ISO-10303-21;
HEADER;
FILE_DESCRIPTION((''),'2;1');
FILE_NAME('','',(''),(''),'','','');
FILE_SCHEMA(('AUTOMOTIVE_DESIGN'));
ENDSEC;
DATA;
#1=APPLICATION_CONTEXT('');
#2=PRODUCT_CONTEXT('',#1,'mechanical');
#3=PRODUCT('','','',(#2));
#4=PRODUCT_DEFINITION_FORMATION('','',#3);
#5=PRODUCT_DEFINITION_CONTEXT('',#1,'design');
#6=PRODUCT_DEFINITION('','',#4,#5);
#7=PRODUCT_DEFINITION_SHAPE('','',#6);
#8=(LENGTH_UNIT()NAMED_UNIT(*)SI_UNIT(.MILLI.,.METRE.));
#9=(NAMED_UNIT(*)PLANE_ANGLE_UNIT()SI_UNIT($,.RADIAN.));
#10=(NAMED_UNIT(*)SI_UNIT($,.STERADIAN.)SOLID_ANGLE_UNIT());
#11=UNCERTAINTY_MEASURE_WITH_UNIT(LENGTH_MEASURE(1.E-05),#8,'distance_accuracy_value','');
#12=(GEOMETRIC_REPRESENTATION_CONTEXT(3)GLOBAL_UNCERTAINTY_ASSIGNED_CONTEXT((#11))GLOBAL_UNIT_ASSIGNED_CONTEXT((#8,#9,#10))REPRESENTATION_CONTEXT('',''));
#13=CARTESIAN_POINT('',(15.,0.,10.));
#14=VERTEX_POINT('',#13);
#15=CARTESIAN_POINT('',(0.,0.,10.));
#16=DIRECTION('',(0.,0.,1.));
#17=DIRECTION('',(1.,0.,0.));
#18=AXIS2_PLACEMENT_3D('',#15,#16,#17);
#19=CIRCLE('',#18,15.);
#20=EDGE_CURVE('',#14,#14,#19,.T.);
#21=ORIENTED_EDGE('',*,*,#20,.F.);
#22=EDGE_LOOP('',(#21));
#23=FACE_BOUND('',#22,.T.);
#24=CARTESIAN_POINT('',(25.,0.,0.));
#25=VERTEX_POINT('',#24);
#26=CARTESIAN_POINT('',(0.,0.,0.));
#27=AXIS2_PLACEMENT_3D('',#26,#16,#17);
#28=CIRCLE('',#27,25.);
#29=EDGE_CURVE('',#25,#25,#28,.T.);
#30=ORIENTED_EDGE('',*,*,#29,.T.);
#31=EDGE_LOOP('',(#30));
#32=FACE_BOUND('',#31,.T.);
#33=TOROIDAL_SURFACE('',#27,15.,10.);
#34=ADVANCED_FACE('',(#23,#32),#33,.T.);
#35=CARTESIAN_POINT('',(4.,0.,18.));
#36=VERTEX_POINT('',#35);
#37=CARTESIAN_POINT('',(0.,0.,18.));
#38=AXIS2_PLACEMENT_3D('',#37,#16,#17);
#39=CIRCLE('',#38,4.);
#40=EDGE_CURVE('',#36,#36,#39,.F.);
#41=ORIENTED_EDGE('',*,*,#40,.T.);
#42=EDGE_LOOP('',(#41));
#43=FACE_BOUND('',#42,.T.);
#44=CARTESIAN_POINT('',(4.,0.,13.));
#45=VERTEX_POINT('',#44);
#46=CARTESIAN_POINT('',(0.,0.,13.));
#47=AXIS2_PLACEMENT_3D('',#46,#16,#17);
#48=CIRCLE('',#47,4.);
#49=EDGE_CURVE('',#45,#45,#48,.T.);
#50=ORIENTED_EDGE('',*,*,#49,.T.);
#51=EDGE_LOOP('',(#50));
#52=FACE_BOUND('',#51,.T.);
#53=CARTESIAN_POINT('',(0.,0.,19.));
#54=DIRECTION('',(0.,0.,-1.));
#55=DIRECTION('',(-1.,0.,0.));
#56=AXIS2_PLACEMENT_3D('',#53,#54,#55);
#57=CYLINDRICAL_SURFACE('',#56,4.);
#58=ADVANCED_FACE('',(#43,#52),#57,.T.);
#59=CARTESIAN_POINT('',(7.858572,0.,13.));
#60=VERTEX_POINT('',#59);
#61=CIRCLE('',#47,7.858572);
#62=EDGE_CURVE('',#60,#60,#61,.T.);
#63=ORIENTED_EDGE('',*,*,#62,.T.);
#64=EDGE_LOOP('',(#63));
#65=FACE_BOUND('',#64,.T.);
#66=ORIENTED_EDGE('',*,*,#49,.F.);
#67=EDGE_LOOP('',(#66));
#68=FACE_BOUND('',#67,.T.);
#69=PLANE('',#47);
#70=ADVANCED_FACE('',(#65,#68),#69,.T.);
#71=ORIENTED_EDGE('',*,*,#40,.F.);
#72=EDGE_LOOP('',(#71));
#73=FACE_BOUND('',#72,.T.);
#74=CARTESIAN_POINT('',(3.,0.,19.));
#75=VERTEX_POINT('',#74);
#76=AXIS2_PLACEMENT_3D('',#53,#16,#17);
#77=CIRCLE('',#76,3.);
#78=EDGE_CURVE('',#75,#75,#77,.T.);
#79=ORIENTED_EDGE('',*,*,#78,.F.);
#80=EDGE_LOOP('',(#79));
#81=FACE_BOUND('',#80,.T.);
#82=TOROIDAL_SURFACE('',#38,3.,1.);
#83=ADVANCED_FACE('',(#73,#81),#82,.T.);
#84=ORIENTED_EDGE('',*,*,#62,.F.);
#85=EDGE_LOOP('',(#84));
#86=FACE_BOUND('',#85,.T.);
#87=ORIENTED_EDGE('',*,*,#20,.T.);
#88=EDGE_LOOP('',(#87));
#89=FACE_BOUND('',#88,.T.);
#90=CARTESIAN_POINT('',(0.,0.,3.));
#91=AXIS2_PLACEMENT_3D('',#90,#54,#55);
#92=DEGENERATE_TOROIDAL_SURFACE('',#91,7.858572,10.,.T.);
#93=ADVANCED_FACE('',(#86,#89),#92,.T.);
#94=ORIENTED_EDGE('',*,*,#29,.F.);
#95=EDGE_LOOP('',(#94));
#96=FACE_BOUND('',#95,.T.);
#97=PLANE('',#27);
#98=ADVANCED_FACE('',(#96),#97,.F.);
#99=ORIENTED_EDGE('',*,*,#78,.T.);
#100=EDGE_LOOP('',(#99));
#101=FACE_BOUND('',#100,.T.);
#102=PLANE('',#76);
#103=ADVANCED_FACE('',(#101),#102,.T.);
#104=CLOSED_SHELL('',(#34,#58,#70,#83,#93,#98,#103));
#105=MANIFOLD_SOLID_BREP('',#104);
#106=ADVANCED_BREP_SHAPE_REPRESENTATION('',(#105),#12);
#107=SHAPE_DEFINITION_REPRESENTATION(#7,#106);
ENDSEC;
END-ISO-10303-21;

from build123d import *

# Parameters (mm, degrees)
ESQUISSE1_R        = 25
BOSS_EXTRU_1_DEPTH = 10
ESQUISSE2_R        = 15
BOSS_EXTRU_2_DEPTH = 3
ESQUISSE3_R        = 4
BOSS_EXTRU_3_DEPTH = 6
CONG_1_R           = 10
CONG_2_R           = 1
CONG_3_R           = 10


# Some blends are built 0.0001 mm under size
with BuildPart() as part:
    # Esquisse1 → Boss.-Extru.1 (new body)
    with BuildSketch(Plane.XY):
        Circle(ESQUISSE1_R)
    extrude(amount=BOSS_EXTRU_1_DEPTH)

    # Esquisse2 → Boss.-Extru.2 (add)
    with BuildSketch(Plane.XY.offset(10)):
        Circle(ESQUISSE2_R)
    extrude(amount=BOSS_EXTRU_2_DEPTH)

    # Esquisse3 → Boss.-Extru.3 (add)
    with BuildSketch(Plane.XY.offset(13)):
        Circle(ESQUISSE3_R)
    extrude(amount=BOSS_EXTRU_3_DEPTH)

    # Congé1
    # the kernel refuses this fillet: 10 mm, written as the material it takes off along each edge
    with BuildSketch(Plane(origin=(0, 0, 13), x_dir=(1, 0, 0), z_dir=(0, -1, 0))) as cong_1_piece_1:
        with BuildLine():
            CenterArc((7.858571571, -10), CONG_1_R, 44.427004001, 45.572995999)
            Line((7.858571571, 0), (7.858571571, 0.2))
            Line((7.858571571, 0.2), (15, 0.2))
            Line((15, 0.2), (15.2, 0))
            ThreePointArc((15.2, 0), (15.2, -1.5), (15.142828569, -2.86))
            Line((15.142828569, -2.86), (15, -3))
        make_face()
    revolve(axis=Axis((0, 0, 13), (0, 0, 1)), mode=Mode.SUBTRACT)

    # Congé2
    cong_2_edges = [part.edges().sort_by_distance(p)[0] for p in [
        (-4, 0, 19),
    ]]
    fillet(cong_2_edges, radius=CONG_2_R)

    # Congé3
    cong_3_edges = [part.edges().sort_by_distance(p)[0] for p in [
        (-25, 0, 10),
    ]]
    fillet(cong_3_edges, radius=CONG_3_R - 0.0001)  # a hair under: the kernel refuses the full size


solid = part.part
